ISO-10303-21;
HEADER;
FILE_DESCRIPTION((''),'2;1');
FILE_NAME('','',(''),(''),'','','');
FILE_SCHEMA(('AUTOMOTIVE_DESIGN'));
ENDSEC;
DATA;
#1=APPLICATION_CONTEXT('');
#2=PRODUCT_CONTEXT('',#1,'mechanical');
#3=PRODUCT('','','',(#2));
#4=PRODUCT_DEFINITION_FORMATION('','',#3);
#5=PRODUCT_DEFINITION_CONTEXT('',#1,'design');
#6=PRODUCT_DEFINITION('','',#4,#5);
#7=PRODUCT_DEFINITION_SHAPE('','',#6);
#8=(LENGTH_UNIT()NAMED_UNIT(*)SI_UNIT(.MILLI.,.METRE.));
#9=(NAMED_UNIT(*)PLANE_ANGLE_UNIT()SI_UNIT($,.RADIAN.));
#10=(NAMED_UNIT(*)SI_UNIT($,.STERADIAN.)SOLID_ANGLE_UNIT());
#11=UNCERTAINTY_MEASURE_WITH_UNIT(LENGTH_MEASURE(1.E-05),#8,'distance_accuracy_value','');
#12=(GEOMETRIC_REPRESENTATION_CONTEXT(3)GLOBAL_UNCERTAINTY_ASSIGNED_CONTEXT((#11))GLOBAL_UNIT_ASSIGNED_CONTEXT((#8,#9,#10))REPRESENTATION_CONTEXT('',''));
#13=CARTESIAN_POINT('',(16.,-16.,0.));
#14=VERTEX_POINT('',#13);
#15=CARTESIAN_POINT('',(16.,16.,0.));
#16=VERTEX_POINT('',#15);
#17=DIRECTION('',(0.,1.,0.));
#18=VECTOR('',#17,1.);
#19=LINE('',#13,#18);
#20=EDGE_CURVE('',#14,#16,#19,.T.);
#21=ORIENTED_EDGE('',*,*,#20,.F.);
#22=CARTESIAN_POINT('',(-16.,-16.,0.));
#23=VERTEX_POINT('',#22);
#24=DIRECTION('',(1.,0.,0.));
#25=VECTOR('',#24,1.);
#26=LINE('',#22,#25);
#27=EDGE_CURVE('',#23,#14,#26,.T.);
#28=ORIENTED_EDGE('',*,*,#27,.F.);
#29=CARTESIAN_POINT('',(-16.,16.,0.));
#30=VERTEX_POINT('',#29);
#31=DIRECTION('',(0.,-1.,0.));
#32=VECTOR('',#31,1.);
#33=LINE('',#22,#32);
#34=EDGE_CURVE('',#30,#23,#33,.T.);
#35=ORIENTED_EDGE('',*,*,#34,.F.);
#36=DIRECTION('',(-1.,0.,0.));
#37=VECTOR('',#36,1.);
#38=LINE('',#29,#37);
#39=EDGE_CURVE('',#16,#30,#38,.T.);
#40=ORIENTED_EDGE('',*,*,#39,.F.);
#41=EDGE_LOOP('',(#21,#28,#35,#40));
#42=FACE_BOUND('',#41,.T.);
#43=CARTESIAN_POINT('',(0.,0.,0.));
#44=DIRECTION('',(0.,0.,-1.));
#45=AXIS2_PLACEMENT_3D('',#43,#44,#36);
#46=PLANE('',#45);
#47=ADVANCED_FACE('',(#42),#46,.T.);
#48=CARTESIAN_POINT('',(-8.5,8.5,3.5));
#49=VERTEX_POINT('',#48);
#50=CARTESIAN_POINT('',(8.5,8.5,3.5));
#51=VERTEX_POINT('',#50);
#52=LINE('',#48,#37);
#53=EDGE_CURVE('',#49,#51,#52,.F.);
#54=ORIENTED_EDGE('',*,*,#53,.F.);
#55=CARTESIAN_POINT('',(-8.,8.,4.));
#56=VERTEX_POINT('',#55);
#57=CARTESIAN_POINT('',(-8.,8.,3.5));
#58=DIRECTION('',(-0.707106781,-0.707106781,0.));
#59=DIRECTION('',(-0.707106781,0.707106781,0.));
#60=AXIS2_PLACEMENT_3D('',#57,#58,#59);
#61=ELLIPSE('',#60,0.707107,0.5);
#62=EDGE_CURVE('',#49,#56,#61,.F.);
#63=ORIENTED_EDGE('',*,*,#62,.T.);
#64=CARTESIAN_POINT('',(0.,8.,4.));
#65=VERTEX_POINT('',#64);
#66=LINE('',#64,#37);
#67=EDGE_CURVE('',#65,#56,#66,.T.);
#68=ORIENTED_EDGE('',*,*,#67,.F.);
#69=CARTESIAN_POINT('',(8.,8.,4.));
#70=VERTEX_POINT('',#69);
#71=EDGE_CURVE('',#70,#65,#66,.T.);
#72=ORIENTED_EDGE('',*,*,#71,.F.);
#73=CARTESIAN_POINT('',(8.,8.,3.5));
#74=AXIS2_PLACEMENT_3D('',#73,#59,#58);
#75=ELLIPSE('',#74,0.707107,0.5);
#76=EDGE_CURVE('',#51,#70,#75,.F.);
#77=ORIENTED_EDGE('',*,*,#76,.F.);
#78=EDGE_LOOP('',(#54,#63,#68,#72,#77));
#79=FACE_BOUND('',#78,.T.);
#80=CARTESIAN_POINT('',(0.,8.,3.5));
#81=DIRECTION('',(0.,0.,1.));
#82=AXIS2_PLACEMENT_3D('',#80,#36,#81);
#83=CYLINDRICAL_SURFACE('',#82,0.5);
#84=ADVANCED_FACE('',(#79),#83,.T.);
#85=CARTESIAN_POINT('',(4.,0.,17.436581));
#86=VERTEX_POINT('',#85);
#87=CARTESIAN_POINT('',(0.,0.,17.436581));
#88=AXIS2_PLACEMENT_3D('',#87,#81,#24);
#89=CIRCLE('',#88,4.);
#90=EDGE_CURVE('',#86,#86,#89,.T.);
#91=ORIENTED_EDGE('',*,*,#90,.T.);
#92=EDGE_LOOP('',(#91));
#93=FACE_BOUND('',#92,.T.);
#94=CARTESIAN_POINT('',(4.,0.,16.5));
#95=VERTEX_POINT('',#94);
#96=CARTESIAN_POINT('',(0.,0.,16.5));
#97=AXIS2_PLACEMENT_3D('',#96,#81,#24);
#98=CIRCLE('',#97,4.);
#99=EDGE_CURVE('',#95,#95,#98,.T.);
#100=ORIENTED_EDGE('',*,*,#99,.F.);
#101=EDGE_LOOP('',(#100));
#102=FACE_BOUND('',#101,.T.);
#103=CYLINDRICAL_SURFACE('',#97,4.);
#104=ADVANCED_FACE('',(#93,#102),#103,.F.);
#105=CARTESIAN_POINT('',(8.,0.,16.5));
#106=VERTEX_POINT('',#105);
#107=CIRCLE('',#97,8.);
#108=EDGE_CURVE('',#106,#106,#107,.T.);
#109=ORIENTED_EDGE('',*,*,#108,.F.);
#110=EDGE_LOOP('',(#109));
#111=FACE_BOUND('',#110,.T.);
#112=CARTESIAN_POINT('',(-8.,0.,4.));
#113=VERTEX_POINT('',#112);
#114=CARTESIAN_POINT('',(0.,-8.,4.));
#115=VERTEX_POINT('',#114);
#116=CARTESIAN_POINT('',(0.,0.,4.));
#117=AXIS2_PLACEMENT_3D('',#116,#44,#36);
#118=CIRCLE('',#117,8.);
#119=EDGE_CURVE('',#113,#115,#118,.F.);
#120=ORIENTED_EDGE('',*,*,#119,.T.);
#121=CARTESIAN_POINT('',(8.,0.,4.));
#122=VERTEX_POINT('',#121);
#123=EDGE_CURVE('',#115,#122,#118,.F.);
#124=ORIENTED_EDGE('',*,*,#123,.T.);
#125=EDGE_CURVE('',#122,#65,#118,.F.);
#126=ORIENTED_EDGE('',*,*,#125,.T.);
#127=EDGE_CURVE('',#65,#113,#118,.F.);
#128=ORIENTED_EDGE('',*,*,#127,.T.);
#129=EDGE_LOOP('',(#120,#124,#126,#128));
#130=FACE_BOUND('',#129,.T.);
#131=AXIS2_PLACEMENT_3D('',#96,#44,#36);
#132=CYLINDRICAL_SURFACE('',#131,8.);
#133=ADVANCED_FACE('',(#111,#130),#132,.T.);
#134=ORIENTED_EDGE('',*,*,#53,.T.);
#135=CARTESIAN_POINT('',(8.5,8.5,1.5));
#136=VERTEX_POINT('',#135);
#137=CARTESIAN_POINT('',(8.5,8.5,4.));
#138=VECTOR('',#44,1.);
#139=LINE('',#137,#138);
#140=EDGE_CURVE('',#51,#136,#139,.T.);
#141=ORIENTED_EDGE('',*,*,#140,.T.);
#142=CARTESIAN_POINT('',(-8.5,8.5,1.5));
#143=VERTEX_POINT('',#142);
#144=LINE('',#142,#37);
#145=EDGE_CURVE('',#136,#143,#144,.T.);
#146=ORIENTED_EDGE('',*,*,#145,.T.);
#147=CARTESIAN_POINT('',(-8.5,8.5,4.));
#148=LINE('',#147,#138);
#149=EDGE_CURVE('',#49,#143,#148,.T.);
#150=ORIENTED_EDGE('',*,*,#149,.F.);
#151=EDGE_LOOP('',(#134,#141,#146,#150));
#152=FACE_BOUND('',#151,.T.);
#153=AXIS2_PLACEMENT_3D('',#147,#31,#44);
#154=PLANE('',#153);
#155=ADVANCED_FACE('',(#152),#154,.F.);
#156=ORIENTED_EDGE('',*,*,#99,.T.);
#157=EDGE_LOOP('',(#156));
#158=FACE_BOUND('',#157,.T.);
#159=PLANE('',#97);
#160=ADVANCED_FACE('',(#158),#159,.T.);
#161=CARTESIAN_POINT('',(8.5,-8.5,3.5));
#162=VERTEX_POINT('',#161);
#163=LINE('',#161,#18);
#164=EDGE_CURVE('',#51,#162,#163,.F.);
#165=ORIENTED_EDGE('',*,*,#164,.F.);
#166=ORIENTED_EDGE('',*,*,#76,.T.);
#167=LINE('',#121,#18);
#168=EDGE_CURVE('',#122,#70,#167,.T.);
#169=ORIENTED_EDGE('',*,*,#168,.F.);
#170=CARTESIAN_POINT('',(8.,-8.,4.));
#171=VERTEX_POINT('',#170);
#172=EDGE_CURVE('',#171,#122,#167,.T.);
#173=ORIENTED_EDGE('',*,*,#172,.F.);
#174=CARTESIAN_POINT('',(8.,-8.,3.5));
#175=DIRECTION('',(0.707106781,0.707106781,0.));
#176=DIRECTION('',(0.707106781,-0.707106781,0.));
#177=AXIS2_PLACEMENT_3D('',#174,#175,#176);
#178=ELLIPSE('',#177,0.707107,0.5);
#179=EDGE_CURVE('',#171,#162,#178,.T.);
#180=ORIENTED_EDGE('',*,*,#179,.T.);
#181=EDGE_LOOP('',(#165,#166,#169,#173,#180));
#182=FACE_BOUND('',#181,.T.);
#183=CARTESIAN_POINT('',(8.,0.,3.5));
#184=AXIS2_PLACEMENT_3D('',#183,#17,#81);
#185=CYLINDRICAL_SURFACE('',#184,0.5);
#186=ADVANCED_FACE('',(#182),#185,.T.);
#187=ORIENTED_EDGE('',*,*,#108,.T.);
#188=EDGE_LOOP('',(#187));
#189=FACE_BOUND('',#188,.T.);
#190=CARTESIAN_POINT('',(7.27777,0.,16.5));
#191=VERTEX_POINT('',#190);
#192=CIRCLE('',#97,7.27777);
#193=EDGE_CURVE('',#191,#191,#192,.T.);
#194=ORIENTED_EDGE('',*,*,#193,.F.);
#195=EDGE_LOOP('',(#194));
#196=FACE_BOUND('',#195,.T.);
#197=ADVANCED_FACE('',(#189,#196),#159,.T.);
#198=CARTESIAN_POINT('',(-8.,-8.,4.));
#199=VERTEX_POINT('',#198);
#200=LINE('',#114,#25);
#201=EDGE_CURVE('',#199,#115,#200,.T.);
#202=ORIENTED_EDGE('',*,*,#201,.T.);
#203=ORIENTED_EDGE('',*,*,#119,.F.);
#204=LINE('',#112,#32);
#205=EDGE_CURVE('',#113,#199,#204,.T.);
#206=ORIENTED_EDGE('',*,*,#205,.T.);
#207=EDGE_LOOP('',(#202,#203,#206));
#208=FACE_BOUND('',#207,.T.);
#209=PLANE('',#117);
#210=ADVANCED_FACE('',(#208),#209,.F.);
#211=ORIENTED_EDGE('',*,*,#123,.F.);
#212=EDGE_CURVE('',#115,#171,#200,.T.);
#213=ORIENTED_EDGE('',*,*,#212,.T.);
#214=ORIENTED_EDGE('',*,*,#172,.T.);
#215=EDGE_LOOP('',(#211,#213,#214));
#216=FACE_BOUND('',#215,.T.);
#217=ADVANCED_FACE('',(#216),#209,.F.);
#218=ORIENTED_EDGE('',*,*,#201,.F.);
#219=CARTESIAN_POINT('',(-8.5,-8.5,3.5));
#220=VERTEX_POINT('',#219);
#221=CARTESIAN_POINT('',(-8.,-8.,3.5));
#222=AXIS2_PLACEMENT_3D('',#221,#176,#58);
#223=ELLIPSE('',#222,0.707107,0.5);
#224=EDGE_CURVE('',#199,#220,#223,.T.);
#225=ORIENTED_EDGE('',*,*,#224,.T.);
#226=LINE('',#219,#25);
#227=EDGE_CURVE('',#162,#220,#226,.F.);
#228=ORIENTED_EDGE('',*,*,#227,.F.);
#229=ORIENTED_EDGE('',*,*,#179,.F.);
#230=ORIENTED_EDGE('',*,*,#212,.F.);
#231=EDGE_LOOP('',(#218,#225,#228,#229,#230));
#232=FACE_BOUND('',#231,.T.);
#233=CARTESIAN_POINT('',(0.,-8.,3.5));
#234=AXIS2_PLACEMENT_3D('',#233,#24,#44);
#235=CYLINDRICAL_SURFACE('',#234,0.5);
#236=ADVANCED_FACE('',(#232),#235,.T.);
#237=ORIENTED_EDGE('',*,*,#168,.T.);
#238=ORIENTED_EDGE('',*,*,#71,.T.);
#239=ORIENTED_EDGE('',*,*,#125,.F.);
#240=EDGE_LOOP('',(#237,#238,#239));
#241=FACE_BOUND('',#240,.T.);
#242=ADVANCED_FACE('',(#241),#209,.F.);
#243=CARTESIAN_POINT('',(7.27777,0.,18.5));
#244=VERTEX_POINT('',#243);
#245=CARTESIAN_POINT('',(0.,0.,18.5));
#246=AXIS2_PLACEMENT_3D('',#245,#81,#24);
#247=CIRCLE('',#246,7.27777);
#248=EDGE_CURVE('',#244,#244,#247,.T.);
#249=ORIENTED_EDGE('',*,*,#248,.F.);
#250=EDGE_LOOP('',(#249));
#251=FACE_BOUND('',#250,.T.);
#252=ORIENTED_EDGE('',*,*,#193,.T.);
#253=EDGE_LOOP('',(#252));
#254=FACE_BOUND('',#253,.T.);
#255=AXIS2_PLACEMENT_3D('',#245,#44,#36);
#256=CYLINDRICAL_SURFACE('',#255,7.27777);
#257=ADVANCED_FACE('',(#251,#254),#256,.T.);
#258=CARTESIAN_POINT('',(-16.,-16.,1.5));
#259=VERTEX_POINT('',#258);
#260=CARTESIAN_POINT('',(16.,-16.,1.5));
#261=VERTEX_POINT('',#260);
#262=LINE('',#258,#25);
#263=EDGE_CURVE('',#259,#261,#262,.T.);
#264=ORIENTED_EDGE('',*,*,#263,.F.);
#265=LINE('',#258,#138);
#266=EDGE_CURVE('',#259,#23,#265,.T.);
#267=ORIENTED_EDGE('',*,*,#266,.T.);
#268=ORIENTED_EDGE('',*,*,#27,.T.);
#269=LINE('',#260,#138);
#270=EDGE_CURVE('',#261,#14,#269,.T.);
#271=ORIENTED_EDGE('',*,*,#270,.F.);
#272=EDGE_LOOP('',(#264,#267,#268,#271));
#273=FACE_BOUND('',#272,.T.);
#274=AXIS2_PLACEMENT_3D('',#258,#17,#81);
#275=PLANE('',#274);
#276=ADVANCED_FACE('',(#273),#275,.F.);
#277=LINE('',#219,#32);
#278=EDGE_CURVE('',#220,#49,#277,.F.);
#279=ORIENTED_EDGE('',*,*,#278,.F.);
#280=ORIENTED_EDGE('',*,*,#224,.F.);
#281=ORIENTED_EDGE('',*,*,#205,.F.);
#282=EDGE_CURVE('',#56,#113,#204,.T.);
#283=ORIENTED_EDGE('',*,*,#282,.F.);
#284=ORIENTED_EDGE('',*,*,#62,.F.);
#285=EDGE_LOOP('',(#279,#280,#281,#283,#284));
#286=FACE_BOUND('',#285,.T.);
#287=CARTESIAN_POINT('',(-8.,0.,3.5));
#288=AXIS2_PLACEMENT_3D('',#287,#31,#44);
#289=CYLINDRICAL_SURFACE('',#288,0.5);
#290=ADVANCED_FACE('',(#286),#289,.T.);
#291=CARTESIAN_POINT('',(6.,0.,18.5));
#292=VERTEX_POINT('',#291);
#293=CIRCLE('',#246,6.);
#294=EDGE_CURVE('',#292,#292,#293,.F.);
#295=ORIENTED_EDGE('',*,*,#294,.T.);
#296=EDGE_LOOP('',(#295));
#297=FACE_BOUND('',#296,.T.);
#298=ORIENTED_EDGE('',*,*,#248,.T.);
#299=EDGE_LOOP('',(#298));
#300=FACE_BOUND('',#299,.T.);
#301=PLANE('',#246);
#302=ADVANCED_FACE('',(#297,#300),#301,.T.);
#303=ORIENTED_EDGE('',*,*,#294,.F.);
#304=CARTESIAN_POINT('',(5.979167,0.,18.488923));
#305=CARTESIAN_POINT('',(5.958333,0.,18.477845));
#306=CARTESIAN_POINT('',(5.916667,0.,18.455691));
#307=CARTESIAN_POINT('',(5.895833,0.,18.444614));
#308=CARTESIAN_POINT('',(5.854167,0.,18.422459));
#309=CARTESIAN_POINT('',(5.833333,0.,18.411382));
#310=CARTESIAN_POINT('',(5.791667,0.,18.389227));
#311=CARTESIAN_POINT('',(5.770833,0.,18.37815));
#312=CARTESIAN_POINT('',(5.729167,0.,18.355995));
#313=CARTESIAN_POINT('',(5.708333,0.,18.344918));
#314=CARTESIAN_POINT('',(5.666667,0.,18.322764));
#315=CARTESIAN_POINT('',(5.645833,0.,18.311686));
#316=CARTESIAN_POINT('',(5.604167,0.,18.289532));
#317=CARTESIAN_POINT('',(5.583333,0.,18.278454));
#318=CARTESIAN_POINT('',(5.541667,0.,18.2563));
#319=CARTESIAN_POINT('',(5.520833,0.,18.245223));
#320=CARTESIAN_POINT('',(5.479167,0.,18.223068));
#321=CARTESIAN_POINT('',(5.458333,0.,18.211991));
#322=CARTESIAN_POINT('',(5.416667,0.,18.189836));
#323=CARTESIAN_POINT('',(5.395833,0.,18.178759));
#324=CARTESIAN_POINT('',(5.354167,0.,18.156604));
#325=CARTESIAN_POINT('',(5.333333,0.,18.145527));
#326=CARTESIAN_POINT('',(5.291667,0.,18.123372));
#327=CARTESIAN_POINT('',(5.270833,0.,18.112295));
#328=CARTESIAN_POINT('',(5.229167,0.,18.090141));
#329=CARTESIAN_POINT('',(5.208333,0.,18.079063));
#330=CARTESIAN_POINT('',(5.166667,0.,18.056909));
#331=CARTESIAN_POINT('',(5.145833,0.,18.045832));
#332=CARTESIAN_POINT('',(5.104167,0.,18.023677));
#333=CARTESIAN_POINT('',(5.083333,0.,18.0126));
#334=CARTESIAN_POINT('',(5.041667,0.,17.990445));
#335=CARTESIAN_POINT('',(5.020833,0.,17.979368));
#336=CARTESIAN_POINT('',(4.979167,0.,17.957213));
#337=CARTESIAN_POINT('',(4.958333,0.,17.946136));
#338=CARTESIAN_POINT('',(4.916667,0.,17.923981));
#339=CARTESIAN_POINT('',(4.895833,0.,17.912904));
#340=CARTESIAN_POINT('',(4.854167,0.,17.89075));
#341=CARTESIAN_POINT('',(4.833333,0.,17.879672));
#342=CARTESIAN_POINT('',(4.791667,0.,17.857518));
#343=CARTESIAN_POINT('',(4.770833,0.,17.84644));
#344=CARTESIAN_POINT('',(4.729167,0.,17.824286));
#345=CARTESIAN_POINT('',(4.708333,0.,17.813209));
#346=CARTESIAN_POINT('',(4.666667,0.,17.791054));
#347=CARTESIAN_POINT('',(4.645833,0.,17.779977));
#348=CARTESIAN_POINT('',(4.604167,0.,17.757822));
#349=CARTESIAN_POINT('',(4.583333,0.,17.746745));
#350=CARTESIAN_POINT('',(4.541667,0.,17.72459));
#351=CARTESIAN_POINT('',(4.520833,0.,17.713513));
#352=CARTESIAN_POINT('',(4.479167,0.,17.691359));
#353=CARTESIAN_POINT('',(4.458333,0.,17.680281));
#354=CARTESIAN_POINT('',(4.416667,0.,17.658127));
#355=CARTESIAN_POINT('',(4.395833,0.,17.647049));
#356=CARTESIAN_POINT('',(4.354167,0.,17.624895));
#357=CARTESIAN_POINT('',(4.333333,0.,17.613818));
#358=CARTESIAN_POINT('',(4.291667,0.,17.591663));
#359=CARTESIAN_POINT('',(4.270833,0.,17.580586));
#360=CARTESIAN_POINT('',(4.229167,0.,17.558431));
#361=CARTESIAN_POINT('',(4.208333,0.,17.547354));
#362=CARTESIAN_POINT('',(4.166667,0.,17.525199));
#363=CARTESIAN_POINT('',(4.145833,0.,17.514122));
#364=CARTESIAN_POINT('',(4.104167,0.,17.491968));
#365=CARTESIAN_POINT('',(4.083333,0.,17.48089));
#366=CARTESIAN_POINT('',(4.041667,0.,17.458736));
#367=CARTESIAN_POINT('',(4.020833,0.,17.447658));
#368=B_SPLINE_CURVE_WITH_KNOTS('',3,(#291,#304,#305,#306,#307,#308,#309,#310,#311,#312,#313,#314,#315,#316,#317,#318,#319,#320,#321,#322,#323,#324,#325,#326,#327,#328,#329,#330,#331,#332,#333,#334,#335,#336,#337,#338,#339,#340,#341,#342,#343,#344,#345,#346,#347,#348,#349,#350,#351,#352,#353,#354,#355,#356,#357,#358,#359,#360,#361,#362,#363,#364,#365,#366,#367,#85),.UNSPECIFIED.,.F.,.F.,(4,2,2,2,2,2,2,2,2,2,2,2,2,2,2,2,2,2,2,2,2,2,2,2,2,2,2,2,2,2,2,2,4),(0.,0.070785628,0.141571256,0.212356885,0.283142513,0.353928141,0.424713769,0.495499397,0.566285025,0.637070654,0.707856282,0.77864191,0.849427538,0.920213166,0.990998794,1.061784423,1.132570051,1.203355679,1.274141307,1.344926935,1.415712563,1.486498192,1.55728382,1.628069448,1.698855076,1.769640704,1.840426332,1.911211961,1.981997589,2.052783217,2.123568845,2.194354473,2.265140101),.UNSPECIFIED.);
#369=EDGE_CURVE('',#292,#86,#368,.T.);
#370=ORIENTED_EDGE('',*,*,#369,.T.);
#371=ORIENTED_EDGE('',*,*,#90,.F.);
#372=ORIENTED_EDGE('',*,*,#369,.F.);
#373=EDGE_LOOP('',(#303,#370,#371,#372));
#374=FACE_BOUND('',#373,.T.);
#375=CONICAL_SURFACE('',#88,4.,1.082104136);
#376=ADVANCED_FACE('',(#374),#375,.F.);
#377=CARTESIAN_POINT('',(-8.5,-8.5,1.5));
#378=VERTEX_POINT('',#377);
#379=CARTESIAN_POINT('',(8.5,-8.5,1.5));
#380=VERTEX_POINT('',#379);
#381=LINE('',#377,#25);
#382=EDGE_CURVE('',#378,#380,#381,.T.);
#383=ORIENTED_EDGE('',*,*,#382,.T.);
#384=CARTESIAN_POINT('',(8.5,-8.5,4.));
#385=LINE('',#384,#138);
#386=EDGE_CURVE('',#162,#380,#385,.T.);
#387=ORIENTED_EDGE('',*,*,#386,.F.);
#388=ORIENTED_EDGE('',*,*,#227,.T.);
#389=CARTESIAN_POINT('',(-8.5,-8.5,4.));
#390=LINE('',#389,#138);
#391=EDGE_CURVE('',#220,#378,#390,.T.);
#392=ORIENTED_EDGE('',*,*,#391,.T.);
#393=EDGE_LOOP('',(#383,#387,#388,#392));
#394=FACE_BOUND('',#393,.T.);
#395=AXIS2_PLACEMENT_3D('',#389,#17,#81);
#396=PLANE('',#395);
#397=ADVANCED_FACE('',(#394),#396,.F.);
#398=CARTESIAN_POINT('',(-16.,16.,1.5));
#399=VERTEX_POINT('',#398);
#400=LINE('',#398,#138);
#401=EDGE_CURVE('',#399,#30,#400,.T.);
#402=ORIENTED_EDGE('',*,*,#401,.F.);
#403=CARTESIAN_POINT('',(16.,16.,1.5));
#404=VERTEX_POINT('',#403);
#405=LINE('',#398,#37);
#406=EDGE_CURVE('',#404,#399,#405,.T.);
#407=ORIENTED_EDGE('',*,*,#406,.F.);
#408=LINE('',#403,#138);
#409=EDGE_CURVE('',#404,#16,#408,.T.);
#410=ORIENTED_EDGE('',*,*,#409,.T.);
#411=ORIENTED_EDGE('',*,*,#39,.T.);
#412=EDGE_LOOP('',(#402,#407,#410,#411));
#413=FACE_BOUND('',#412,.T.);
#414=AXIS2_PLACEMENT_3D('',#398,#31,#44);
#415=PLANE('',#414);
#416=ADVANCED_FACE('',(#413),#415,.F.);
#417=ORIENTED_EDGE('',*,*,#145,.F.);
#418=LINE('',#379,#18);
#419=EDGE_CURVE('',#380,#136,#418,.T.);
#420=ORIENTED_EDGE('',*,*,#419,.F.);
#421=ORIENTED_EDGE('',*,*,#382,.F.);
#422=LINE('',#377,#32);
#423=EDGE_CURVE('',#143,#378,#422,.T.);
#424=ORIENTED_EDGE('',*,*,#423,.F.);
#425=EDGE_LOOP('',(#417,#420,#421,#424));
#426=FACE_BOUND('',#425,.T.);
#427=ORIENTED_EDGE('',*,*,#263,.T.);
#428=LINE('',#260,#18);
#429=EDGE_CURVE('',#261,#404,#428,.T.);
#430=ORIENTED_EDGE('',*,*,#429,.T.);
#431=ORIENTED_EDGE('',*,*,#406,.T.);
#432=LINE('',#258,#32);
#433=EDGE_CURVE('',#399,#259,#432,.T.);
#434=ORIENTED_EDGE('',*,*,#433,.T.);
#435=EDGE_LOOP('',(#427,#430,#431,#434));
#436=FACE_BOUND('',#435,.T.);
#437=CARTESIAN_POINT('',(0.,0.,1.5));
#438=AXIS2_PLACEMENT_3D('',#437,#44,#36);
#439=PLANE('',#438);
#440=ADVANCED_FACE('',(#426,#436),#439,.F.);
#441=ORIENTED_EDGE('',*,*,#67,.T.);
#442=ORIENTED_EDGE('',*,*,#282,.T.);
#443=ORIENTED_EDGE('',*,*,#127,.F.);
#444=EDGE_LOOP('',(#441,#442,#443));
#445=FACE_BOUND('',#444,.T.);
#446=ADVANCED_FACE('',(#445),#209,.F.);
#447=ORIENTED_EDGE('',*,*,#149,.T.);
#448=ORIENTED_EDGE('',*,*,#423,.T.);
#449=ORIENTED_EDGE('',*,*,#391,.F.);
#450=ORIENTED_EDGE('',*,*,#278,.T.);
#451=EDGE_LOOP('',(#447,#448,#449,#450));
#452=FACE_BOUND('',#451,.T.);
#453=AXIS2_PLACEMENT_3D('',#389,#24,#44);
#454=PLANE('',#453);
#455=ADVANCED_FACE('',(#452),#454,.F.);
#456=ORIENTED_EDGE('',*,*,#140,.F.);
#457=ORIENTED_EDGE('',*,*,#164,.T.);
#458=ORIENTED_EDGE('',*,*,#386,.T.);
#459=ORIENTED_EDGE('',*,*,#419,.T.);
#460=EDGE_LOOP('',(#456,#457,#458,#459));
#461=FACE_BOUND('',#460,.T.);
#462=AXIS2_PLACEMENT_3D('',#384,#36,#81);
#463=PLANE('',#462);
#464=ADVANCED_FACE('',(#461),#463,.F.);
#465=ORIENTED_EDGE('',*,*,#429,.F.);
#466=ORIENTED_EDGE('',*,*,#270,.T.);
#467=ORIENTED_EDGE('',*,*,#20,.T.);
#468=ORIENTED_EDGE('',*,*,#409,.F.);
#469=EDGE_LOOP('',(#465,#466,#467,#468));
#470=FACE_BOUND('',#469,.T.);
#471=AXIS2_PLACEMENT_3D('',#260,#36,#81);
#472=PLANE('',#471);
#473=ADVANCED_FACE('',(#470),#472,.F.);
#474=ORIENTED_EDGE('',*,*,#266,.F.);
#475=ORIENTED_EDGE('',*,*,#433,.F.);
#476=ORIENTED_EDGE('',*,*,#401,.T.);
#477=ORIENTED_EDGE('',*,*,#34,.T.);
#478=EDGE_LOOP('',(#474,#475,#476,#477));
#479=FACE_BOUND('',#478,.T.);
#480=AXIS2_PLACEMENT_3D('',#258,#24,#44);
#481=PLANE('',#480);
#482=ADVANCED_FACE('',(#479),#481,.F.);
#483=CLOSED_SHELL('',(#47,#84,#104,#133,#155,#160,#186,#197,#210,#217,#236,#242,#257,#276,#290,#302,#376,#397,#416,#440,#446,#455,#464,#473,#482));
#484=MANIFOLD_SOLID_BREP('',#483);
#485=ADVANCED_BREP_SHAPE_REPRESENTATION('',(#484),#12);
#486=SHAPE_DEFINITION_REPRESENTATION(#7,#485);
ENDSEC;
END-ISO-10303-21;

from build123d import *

# Parameters (mm, degrees)
SKETCH1_W           = 32
SKETCH1_H           = 32
BOSS_EXTRUDE1_DEPTH = 1.5
SKETCH3_W           = 17
SKETCH3_H           = 17
BOSS_EXTRUDE2_DEPTH = 2.5
SKETCH4_R           = 8
BOSS_EXTRUDE3_DEPTH = 12.5
SKETCH5_R           = 7.277770315
BOSS_EXTRUDE4_DEPTH = 2
SKETCH6_R           = 4
CUT_EXTRUDE1_DEPTH  = 2
CHAMFER1_SIZE       = 2
CHAMFER1_SIZE2      = 1.063418863
FILLET2_R           = 0.5


with BuildPart() as part:
    # Sketch1 → Boss-Extrude1 (new body)
    with BuildSketch(Plane.XY):
        Rectangle(SKETCH1_W, SKETCH1_H)
    extrude(amount=BOSS_EXTRUDE1_DEPTH)

    # Sketch3 → Boss-Extrude2 (add)
    with BuildSketch(Plane.XY.offset(1.5)):
        Rectangle(SKETCH3_W, SKETCH3_H)
    extrude(amount=BOSS_EXTRUDE2_DEPTH)

    # Sketch4 → Boss-Extrude3 (add)
    with BuildSketch(Plane.XY.offset(4)):
        with Locations(Location((0, 0, 0), (0, 0, 180))):
            Circle(SKETCH4_R)
    extrude(amount=BOSS_EXTRUDE3_DEPTH)

    # Sketch5 → Boss-Extrude4 (add)
    with BuildSketch(Plane.XY.offset(16.5)):
        Circle(SKETCH5_R)
    extrude(amount=BOSS_EXTRUDE4_DEPTH)

    # Sketch6 → Cut-Extrude1 (cut)
    with BuildSketch(Plane.XY.offset(18.5)):
        Circle(SKETCH6_R)
    extrude(amount=-CUT_EXTRUDE1_DEPTH, mode=Mode.SUBTRACT)

    # Chamfer1
    chamfer1_edges = [part.edges().sort_by_distance(p)[0] for p in [
        (-4, 0, 18.5),
    ]]
    chamfer1_side = [part.faces().sort_by_distance(p)[0] for p in [
        (-7.071923885, 0, 18.5),
    ]]
    chamfer(chamfer1_edges, length=CHAMFER1_SIZE, length2=CHAMFER1_SIZE2, reference=chamfer1_side[0])

    # Fillet2
    fillet2_edges = [part.edges().sort_by_distance(p)[0] for p in [
        (8.5, 0, 4),
        (0, 8.5, 4),
        (-8.5, 0, 4),
        (0, -8.5, 4),
    ]]
    fillet(fillet2_edges, radius=FILLET2_R - 0.0001)  # a hair under: the kernel refuses the full size


solid = part.part
